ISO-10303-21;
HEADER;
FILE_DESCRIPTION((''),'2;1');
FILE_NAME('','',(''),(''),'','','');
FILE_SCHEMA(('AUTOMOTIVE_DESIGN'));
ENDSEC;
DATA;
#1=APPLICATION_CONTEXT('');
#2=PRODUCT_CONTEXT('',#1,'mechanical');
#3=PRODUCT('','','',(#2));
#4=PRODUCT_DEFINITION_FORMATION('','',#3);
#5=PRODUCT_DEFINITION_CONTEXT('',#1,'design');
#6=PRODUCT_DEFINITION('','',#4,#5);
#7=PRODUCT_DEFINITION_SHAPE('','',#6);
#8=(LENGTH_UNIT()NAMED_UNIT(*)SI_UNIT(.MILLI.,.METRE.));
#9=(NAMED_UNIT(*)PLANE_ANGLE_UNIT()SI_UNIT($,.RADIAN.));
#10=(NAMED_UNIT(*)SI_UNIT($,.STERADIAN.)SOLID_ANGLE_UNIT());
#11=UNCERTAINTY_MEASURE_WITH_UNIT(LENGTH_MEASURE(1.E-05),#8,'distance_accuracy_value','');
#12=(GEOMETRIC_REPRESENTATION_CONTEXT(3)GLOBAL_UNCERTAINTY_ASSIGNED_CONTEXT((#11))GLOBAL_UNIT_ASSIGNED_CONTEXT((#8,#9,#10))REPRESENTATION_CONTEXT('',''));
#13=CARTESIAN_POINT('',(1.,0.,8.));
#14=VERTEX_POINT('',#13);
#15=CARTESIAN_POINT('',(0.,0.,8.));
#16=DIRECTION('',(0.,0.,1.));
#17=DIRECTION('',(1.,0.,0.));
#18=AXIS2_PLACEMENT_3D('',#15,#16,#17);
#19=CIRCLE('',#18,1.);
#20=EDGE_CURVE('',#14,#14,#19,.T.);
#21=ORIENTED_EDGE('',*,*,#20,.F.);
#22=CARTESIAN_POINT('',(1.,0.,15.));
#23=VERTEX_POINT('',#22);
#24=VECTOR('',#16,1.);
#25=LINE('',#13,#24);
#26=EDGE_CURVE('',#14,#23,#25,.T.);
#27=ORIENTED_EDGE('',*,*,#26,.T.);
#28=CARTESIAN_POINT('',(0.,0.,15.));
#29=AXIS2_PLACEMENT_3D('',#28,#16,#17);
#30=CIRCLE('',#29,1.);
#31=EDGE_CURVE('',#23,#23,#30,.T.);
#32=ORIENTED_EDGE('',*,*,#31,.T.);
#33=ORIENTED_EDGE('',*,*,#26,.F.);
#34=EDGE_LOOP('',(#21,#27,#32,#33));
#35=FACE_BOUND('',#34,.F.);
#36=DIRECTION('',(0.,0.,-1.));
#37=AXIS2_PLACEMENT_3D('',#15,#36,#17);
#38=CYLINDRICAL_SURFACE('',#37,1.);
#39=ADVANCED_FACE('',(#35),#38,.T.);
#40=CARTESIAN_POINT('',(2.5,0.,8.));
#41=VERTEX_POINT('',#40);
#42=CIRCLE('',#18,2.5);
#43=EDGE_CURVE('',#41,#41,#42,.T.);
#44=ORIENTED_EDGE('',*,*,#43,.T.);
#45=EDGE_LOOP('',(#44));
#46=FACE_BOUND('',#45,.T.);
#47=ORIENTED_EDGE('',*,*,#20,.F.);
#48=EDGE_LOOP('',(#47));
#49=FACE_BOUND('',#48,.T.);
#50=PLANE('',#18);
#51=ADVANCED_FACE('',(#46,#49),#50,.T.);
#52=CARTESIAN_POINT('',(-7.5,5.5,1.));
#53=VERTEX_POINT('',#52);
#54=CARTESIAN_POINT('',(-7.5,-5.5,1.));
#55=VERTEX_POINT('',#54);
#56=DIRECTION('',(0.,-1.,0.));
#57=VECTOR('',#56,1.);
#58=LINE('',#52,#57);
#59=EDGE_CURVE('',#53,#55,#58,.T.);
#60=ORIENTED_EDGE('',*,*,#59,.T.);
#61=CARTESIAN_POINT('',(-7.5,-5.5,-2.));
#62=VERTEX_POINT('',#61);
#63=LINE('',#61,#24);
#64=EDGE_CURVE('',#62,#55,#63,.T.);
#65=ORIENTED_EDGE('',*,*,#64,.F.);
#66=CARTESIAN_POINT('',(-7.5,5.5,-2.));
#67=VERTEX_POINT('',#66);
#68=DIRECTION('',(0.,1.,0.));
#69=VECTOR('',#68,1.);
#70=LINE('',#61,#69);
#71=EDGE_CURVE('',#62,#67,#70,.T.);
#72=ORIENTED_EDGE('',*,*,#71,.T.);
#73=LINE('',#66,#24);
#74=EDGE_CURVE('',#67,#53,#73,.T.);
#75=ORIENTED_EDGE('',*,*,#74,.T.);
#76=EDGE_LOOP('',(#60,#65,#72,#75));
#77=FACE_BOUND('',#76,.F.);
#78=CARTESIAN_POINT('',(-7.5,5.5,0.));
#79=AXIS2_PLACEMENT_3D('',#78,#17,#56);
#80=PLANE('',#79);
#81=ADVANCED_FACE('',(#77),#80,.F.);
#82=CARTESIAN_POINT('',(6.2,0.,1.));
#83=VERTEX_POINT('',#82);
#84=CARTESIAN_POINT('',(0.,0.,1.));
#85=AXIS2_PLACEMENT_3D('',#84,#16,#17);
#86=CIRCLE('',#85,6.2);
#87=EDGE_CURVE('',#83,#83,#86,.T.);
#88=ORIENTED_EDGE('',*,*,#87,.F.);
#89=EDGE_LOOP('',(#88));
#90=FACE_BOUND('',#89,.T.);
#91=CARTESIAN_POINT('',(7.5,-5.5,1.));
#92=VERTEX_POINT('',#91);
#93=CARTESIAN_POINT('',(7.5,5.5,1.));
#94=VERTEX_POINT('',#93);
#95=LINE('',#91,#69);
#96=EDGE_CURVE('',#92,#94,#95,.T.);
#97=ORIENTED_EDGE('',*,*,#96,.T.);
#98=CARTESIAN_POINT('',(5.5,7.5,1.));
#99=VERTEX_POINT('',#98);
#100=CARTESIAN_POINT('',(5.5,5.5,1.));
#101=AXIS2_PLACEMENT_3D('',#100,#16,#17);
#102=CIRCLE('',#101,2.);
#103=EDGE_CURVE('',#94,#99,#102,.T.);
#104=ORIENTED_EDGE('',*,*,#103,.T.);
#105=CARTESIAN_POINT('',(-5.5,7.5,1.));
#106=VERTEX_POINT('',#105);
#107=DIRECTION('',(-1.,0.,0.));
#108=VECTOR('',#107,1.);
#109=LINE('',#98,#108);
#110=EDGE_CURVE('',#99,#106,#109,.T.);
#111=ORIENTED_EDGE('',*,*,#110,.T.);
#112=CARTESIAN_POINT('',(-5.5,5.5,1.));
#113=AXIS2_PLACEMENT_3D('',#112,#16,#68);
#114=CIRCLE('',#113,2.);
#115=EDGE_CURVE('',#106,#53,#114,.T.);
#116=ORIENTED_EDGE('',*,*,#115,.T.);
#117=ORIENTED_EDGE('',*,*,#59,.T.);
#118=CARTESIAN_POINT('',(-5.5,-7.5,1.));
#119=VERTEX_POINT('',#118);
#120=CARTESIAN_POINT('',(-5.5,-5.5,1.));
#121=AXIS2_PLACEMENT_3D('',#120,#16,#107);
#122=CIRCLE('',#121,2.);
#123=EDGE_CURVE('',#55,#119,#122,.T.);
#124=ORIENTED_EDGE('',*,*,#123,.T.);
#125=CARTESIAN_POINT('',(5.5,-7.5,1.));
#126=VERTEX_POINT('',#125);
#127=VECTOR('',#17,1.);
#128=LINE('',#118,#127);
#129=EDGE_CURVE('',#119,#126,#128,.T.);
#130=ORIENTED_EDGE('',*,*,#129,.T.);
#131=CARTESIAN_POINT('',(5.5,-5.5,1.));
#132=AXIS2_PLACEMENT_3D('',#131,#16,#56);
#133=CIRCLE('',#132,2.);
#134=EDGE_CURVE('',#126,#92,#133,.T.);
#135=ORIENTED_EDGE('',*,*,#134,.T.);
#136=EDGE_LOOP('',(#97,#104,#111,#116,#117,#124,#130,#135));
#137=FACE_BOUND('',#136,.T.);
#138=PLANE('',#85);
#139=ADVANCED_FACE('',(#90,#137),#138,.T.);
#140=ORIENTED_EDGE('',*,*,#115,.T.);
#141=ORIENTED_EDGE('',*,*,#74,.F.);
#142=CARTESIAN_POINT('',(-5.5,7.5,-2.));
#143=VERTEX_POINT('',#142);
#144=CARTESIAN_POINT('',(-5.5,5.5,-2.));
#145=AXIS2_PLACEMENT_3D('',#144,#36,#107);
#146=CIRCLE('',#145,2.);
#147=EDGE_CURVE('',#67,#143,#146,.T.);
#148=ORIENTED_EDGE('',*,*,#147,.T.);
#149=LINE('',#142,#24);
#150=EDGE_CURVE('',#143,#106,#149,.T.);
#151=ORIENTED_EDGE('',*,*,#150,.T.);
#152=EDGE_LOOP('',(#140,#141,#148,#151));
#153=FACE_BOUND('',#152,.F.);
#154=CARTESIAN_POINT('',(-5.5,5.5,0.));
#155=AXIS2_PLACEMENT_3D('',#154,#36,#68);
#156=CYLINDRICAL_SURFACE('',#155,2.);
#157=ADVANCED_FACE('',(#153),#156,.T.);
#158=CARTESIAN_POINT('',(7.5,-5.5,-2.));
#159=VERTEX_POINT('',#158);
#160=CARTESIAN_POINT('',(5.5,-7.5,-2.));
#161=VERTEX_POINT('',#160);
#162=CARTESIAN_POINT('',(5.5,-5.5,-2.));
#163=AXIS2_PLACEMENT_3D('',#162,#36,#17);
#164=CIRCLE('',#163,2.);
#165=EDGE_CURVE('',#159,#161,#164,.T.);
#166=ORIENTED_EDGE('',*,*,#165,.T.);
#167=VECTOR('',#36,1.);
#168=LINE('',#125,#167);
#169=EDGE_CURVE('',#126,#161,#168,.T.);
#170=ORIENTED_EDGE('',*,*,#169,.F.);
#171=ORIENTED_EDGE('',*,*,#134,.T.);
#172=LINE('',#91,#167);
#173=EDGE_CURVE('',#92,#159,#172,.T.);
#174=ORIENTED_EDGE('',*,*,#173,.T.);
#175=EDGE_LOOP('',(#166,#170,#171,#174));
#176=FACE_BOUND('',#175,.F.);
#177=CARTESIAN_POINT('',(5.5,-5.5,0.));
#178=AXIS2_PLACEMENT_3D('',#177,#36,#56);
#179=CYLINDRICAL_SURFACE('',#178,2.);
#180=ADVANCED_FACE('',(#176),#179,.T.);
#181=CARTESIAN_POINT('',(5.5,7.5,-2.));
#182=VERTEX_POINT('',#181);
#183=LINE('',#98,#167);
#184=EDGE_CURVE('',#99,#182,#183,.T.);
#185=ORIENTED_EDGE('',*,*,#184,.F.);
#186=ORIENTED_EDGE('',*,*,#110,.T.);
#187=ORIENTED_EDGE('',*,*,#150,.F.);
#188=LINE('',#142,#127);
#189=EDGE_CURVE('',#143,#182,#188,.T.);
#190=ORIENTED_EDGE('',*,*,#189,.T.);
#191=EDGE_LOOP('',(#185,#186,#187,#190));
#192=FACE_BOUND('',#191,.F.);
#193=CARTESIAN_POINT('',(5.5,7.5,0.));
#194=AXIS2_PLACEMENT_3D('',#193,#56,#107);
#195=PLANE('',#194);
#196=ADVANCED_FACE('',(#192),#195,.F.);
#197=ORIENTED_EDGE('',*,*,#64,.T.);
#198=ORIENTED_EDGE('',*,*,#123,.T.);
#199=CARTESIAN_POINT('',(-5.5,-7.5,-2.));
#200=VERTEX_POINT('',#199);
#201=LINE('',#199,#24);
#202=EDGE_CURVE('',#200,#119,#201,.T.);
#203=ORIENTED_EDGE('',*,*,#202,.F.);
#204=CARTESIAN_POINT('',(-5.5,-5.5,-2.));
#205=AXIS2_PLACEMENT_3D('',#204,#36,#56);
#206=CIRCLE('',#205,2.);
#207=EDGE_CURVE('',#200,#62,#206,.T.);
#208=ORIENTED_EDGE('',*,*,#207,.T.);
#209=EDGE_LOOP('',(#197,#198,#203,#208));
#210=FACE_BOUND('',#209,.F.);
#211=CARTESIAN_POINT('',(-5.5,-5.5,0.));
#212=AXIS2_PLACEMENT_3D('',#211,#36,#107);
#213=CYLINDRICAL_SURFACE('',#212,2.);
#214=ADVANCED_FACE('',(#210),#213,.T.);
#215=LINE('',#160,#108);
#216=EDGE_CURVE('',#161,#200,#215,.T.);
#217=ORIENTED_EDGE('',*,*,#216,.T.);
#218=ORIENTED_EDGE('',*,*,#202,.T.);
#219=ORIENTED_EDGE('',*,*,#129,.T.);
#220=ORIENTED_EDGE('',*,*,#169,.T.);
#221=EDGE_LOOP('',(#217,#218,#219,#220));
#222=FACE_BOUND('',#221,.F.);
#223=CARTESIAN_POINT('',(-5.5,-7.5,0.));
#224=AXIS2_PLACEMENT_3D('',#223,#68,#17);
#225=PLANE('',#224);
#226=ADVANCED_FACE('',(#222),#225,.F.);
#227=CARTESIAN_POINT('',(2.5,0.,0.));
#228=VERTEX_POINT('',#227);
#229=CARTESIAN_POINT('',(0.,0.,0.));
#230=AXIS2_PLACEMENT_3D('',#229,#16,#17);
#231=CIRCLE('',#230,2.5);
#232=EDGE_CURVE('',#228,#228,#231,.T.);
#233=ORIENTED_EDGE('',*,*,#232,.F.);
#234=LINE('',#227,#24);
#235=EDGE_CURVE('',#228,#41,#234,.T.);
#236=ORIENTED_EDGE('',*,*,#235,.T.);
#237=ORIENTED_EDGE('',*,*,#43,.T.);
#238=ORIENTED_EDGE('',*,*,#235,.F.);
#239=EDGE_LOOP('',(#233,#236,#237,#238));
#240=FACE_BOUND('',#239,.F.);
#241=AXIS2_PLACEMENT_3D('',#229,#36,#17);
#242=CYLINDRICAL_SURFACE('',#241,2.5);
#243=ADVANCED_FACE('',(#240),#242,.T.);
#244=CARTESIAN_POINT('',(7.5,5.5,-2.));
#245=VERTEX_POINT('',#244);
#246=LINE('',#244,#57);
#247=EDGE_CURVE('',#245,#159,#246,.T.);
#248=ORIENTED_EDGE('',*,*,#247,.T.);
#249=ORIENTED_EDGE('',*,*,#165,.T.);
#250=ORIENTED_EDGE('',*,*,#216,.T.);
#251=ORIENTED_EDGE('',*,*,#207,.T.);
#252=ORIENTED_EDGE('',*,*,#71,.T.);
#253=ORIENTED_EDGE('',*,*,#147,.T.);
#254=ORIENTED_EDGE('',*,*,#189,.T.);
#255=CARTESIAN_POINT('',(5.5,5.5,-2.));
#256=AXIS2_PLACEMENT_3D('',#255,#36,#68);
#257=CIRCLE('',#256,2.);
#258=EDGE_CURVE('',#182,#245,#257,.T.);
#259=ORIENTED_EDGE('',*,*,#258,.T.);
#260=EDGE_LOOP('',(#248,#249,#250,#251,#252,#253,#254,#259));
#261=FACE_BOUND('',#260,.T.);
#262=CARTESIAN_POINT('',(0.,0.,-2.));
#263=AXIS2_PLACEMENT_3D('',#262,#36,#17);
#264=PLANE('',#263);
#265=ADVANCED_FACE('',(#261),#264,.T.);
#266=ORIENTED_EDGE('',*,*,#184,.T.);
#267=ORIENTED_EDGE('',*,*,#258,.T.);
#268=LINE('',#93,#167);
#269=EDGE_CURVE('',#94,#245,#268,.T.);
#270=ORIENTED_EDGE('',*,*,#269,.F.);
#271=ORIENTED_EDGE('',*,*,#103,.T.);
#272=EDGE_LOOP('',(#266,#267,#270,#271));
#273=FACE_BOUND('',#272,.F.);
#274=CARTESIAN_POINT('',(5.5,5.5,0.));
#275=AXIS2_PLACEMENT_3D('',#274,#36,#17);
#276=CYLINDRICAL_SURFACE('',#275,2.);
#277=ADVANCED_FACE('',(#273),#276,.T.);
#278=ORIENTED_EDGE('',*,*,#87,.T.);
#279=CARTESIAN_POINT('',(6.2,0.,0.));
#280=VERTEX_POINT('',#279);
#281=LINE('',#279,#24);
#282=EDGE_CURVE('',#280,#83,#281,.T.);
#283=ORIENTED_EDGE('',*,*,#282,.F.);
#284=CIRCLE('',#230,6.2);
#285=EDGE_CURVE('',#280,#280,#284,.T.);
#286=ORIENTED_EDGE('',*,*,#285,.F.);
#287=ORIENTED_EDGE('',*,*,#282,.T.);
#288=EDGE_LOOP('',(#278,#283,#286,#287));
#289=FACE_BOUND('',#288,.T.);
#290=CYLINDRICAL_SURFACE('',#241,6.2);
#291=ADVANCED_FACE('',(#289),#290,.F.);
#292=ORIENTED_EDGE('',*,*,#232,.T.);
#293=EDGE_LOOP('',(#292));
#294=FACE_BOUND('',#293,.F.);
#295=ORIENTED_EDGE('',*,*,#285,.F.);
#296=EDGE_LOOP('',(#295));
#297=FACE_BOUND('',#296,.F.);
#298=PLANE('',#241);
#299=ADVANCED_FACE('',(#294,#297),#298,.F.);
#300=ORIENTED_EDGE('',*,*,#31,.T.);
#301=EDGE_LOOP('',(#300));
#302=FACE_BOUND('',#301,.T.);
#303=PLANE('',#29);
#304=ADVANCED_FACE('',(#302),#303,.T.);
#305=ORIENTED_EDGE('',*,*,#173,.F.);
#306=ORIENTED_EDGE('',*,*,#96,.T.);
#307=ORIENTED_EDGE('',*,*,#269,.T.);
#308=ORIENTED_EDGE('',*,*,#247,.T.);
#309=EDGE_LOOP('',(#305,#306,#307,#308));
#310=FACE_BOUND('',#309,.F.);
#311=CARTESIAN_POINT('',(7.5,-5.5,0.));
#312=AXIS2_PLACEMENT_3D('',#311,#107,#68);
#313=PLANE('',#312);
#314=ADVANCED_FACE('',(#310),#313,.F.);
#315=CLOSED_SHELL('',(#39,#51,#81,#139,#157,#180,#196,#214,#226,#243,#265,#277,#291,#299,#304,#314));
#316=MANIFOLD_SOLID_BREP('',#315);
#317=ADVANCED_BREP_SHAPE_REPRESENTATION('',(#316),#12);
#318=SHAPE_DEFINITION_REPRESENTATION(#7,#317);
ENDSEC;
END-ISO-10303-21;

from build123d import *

# Parameters (mm, degrees)
F0_R     = 2.5
F1_DEPTH = 8
F2_R     = 1
F3_DEPTH = 7
F4_R     = 2.5
F5_DEPTH = 2
F6_R     = 6.2
F7_DEPTH = 1


with BuildPart() as f1:
    # F0 (on Top) → F1 (new body)
    with BuildSketch(Plane.XY):
        Circle(F0_R)
    extrude(amount=F1_DEPTH)

    # F2 (on face) → F3 (join)
    with BuildSketch(Plane.XY.offset(8)):
        Circle(F2_R)
    extrude(amount=F3_DEPTH)

    # F4 (on face) → F5 (join)
    with BuildSketch(Plane(origin=(0, 0, 0), x_dir=(1, 0, 0), z_dir=(0, 0, -1))):
        with BuildLine():
            Line((5.5, 7.5), (-5.5, 7.5))
            ThreePointArc((-5.5, 7.5), (-6.9142135624, 6.9142135624), (-7.5, 5.5))
            Line((-7.5, 5.5), (-7.5, -5.5))
            ThreePointArc((-7.5, -5.5), (-6.9142135624, -6.9142135624), (-5.5, -7.5))
            Line((-5.5, -7.5), (5.5, -7.5))
            ThreePointArc((5.5, -7.5), (6.9142135624, -6.9142135624), (7.5, -5.5))
            Line((7.5, -5.5), (7.5, 5.5))
            ThreePointArc((7.5, 5.5), (6.9142135624, 6.9142135624), (5.5, 7.5))
        make_face()
        Circle(F4_R, mode=Mode.SUBTRACT)
        Circle(F4_R)
    extrude(amount=F5_DEPTH)

    # F6 (on face) → F7 (join)
    with BuildSketch(Plane.XY):
        with BuildLine():
            Line((5.5, 7.5), (-5.5, 7.5))
            ThreePointArc((-5.5, 7.5), (-6.9142135624, 6.9142135624), (-7.5, 5.5))
            Line((-7.5, 5.5), (-7.5, -5.5))
            ThreePointArc((-7.5, -5.5), (-6.9142135624, -6.9142135624), (-5.5, -7.5))
            Line((-5.5, -7.5), (5.5, -7.5))
            ThreePointArc((5.5, -7.5), (6.9142135624, -6.9142135624), (7.5, -5.5))
            Line((7.5, -5.5), (7.5, 5.5))
            ThreePointArc((7.5, 5.5), (6.9142135624, 6.9142135624), (5.5, 7.5))
        make_face()
        Circle(F6_R, mode=Mode.SUBTRACT)
    extrude(amount=F7_DEPTH)


solid = f1.part
